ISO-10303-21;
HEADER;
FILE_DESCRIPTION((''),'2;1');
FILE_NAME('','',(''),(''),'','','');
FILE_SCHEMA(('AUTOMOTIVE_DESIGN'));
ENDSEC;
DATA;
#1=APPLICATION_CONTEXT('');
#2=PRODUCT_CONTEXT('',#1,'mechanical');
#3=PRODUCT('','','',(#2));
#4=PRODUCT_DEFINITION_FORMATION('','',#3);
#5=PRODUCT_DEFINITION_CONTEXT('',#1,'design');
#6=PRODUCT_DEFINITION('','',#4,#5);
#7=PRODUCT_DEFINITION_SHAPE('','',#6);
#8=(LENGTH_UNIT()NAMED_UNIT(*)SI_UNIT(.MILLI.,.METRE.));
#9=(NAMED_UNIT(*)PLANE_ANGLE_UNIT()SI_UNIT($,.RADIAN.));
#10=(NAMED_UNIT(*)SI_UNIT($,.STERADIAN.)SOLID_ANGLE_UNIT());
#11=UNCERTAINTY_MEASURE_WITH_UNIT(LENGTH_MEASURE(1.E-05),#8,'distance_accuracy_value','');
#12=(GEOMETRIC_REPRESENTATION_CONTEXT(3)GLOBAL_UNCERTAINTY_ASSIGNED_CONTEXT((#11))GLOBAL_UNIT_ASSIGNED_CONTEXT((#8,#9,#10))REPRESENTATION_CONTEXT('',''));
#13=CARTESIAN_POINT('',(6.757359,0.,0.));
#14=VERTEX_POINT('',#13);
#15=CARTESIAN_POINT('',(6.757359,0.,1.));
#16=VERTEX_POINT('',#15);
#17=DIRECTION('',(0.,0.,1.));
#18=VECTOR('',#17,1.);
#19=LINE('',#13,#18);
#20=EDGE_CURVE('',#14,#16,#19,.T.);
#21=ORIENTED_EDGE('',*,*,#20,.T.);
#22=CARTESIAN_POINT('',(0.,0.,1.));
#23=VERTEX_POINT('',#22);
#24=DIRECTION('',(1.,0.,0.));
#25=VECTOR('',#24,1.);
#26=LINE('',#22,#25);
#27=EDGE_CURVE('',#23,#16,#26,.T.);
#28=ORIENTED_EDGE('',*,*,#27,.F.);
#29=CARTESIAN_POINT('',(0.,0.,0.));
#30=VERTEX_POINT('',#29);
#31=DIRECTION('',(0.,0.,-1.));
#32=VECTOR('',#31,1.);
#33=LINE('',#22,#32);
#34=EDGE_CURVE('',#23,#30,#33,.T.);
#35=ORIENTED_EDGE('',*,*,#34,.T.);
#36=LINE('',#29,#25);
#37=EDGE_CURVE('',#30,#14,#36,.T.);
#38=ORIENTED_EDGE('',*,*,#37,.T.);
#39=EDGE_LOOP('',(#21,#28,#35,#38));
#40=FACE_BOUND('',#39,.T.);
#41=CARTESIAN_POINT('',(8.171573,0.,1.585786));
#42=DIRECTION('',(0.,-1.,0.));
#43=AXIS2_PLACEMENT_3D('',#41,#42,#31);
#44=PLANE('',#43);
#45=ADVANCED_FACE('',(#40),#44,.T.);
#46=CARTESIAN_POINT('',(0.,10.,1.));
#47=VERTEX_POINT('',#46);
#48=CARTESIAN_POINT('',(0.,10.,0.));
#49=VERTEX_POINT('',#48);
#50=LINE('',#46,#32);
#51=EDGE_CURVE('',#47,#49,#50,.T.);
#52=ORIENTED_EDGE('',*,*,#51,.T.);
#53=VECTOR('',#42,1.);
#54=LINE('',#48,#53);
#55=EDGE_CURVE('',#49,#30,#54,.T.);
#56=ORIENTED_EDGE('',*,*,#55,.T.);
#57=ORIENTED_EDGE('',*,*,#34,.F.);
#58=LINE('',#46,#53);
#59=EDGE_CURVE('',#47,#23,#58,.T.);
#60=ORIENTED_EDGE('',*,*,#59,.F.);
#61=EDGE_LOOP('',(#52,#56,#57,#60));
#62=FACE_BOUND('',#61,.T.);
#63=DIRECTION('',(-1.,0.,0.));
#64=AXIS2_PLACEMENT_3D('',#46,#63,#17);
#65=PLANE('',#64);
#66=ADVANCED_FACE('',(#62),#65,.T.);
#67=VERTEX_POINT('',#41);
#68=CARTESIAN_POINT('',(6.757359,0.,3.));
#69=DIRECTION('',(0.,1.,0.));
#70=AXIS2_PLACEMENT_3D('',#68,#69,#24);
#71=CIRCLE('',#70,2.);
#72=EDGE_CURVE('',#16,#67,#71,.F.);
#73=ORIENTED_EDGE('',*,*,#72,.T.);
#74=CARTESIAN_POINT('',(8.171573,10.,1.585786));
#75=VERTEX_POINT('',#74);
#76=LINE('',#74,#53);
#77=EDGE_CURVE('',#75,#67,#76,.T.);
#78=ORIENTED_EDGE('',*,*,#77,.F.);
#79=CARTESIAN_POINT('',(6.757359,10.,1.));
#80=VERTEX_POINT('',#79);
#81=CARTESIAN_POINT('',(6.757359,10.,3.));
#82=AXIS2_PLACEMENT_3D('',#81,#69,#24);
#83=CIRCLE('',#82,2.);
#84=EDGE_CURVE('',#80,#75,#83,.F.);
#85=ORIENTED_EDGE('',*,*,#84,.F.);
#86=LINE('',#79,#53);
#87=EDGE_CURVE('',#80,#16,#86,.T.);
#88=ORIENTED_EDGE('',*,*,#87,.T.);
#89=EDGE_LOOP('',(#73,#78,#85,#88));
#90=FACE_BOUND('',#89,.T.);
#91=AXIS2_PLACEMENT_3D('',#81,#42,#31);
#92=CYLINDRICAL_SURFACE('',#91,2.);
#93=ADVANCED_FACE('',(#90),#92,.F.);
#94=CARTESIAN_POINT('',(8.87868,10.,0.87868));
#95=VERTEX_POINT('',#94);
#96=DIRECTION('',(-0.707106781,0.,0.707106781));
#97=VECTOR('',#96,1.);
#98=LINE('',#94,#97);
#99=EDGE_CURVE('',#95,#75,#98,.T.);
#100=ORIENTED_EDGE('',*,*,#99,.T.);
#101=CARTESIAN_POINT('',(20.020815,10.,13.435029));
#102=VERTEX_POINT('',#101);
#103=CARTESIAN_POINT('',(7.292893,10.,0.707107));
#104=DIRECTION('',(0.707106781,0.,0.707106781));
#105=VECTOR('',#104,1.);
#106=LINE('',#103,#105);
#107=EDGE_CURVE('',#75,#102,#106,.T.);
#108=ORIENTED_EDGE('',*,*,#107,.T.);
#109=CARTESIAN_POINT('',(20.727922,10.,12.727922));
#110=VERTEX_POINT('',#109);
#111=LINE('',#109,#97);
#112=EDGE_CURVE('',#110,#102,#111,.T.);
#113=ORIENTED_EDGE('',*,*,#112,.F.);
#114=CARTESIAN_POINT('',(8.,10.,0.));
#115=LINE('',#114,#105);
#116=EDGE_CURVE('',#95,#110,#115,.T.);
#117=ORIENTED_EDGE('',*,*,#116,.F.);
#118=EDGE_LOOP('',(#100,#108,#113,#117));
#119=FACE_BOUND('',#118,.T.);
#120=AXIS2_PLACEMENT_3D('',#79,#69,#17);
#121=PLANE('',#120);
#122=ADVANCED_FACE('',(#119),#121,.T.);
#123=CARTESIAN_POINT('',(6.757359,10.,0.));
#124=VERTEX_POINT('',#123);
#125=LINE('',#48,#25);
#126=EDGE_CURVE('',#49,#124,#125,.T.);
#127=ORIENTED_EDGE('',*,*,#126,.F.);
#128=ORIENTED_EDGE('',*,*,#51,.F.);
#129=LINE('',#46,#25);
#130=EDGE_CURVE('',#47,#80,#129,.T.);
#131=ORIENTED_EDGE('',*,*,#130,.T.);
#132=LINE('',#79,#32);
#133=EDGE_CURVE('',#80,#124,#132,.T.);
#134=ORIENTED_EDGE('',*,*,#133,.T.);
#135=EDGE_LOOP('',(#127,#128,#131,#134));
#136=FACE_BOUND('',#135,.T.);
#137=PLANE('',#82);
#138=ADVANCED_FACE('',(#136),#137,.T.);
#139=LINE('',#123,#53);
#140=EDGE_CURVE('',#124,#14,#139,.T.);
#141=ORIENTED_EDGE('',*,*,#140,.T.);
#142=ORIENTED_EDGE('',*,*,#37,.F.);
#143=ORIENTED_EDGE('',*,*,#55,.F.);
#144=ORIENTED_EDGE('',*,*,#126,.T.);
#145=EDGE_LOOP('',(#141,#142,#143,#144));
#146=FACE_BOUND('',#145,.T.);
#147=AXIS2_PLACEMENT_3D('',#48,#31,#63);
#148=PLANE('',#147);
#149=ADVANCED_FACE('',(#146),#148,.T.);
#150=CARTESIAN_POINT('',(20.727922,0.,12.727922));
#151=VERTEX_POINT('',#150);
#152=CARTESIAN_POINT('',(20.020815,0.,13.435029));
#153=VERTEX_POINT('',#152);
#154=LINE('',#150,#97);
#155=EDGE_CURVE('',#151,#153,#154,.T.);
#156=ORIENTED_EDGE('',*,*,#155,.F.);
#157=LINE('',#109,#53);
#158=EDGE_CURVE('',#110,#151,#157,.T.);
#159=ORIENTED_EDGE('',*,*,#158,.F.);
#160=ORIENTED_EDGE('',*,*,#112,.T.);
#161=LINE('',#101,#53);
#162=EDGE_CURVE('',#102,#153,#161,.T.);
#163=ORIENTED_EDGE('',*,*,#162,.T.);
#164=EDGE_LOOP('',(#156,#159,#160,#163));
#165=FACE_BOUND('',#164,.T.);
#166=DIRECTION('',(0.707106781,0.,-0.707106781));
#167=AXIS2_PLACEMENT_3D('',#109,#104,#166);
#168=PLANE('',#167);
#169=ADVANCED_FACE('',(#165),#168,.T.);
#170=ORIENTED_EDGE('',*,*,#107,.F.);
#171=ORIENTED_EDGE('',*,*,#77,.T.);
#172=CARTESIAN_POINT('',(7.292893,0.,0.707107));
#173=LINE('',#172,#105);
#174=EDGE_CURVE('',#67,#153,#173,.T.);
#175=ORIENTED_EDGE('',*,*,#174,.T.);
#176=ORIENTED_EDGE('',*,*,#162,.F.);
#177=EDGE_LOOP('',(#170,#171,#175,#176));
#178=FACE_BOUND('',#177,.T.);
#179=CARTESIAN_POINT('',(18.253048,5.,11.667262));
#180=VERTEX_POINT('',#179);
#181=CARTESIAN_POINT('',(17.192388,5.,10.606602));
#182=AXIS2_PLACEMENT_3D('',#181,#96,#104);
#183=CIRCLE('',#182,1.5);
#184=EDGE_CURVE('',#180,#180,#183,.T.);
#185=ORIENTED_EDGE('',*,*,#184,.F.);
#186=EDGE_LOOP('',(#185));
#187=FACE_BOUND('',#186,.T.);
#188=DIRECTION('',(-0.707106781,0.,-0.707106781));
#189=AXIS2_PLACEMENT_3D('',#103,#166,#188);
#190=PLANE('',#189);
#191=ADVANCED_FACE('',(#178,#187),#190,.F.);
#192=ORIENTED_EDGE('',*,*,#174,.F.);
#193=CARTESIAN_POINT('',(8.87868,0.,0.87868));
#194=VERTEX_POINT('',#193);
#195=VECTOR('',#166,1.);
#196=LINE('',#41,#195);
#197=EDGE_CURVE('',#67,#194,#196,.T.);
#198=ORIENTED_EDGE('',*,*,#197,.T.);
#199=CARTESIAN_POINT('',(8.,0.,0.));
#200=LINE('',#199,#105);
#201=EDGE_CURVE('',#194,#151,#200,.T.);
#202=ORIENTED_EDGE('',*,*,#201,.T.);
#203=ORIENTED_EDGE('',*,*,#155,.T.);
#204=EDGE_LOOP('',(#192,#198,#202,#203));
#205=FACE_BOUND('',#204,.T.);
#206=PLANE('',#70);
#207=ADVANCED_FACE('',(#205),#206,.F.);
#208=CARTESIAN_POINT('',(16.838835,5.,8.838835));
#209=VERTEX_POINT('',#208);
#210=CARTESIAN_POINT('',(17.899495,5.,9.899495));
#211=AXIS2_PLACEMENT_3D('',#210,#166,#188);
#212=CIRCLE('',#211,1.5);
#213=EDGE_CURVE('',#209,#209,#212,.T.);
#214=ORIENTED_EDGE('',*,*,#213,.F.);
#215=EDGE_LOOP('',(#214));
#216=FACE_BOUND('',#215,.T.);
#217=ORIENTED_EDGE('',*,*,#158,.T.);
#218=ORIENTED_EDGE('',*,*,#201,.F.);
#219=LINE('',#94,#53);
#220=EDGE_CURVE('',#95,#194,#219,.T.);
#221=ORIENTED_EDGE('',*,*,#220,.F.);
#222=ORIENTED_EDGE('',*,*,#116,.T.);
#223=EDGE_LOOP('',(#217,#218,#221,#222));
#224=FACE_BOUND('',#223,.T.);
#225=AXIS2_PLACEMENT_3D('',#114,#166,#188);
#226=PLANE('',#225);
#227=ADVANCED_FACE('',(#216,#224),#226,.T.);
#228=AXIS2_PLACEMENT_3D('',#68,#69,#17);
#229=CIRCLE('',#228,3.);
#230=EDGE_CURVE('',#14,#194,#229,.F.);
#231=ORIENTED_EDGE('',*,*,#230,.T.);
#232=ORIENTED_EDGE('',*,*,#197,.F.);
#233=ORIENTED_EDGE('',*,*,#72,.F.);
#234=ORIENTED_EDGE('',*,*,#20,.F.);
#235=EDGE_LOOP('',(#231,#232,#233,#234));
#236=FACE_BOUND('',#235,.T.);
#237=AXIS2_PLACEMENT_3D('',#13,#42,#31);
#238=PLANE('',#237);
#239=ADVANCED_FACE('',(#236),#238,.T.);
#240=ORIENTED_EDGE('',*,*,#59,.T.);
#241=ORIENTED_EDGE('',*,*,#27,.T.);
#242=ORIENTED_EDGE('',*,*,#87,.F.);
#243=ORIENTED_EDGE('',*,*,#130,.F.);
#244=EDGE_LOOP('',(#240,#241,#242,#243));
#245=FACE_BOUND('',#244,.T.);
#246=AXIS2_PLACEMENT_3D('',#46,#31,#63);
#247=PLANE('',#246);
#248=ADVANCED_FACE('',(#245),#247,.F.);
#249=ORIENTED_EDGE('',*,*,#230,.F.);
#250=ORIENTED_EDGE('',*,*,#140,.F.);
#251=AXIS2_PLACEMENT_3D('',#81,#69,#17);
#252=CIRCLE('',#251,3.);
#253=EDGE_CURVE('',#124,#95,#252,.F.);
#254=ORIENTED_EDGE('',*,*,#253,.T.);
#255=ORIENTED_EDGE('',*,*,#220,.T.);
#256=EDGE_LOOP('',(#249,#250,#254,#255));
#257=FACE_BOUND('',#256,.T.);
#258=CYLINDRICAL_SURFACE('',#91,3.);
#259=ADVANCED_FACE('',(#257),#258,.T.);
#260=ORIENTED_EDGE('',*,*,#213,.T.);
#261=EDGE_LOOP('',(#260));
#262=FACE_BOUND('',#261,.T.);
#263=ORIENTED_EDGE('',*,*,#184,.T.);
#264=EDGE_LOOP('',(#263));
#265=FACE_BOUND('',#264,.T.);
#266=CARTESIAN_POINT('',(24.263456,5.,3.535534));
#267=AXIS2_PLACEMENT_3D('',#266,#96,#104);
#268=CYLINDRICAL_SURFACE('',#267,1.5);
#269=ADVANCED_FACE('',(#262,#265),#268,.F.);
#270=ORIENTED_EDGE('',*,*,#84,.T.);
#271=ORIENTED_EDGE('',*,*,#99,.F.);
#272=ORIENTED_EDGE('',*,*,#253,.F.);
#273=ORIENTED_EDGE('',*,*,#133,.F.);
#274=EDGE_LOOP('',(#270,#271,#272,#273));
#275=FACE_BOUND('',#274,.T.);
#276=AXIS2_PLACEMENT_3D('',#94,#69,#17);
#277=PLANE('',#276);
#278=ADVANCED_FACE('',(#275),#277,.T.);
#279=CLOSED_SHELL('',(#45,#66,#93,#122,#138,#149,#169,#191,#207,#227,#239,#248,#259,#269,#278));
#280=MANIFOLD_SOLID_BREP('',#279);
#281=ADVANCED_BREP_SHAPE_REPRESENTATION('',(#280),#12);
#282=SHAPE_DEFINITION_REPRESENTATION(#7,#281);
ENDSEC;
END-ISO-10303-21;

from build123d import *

# Parameters (mm, degrees)
BASE_FLANGE1_DEPTH = 10
SKETCH4_R          = 1.5
CUT_EXTRUDE1_DEPTH = 27.149638759


# Sheet-metal steps are written as plain solids
with BuildPart() as part:
    # Sketch1 → Base-Flange1 (new body)
    with BuildSketch(Plane(origin=(0, 0, 0), x_dir=(1, 0, 0), z_dir=(0, 1, 0))):
        with BuildLine():
            Line((0, 0), (6.757359313, 0))
            ThreePointArc((6.757359313, 0), (7.90540961, -0.228361402), (8.878679656, -0.878679656))
            Line((8.878679656, -0.878679656), (20.727922061, -12.727922061))
            Line((20.727922061, -12.727922061), (20.02081528, -13.435028843))
            Line((20.02081528, -13.435028843), (8.171572875, -1.585786438))
            ThreePointArc((8.171572875, -1.585786438), (7.522726178, -1.152240935), (6.757359313, -1))
            Line((6.757359313, -1), (0, -1))
            Line((0, -1), (0, 0))
        make_face()
    extrude(amount=BASE_FLANGE1_DEPTH)

    # Sketch4 → Cut-Extrude1 (cut, through all)
    with BuildSketch(Plane(origin=(3.292893219, 0, -3.292893219), x_dir=(0.7071067811865465, 0, 0.7071067811865486), z_dir=(-0.7071067811865486, 0, 0.7071067811865465))):
        with Locations((19.656854249, 5)):
            Circle(SKETCH4_R)
    extrude(amount=-CUT_EXTRUDE1_DEPTH, mode=Mode.SUBTRACT)


solid = part.part
